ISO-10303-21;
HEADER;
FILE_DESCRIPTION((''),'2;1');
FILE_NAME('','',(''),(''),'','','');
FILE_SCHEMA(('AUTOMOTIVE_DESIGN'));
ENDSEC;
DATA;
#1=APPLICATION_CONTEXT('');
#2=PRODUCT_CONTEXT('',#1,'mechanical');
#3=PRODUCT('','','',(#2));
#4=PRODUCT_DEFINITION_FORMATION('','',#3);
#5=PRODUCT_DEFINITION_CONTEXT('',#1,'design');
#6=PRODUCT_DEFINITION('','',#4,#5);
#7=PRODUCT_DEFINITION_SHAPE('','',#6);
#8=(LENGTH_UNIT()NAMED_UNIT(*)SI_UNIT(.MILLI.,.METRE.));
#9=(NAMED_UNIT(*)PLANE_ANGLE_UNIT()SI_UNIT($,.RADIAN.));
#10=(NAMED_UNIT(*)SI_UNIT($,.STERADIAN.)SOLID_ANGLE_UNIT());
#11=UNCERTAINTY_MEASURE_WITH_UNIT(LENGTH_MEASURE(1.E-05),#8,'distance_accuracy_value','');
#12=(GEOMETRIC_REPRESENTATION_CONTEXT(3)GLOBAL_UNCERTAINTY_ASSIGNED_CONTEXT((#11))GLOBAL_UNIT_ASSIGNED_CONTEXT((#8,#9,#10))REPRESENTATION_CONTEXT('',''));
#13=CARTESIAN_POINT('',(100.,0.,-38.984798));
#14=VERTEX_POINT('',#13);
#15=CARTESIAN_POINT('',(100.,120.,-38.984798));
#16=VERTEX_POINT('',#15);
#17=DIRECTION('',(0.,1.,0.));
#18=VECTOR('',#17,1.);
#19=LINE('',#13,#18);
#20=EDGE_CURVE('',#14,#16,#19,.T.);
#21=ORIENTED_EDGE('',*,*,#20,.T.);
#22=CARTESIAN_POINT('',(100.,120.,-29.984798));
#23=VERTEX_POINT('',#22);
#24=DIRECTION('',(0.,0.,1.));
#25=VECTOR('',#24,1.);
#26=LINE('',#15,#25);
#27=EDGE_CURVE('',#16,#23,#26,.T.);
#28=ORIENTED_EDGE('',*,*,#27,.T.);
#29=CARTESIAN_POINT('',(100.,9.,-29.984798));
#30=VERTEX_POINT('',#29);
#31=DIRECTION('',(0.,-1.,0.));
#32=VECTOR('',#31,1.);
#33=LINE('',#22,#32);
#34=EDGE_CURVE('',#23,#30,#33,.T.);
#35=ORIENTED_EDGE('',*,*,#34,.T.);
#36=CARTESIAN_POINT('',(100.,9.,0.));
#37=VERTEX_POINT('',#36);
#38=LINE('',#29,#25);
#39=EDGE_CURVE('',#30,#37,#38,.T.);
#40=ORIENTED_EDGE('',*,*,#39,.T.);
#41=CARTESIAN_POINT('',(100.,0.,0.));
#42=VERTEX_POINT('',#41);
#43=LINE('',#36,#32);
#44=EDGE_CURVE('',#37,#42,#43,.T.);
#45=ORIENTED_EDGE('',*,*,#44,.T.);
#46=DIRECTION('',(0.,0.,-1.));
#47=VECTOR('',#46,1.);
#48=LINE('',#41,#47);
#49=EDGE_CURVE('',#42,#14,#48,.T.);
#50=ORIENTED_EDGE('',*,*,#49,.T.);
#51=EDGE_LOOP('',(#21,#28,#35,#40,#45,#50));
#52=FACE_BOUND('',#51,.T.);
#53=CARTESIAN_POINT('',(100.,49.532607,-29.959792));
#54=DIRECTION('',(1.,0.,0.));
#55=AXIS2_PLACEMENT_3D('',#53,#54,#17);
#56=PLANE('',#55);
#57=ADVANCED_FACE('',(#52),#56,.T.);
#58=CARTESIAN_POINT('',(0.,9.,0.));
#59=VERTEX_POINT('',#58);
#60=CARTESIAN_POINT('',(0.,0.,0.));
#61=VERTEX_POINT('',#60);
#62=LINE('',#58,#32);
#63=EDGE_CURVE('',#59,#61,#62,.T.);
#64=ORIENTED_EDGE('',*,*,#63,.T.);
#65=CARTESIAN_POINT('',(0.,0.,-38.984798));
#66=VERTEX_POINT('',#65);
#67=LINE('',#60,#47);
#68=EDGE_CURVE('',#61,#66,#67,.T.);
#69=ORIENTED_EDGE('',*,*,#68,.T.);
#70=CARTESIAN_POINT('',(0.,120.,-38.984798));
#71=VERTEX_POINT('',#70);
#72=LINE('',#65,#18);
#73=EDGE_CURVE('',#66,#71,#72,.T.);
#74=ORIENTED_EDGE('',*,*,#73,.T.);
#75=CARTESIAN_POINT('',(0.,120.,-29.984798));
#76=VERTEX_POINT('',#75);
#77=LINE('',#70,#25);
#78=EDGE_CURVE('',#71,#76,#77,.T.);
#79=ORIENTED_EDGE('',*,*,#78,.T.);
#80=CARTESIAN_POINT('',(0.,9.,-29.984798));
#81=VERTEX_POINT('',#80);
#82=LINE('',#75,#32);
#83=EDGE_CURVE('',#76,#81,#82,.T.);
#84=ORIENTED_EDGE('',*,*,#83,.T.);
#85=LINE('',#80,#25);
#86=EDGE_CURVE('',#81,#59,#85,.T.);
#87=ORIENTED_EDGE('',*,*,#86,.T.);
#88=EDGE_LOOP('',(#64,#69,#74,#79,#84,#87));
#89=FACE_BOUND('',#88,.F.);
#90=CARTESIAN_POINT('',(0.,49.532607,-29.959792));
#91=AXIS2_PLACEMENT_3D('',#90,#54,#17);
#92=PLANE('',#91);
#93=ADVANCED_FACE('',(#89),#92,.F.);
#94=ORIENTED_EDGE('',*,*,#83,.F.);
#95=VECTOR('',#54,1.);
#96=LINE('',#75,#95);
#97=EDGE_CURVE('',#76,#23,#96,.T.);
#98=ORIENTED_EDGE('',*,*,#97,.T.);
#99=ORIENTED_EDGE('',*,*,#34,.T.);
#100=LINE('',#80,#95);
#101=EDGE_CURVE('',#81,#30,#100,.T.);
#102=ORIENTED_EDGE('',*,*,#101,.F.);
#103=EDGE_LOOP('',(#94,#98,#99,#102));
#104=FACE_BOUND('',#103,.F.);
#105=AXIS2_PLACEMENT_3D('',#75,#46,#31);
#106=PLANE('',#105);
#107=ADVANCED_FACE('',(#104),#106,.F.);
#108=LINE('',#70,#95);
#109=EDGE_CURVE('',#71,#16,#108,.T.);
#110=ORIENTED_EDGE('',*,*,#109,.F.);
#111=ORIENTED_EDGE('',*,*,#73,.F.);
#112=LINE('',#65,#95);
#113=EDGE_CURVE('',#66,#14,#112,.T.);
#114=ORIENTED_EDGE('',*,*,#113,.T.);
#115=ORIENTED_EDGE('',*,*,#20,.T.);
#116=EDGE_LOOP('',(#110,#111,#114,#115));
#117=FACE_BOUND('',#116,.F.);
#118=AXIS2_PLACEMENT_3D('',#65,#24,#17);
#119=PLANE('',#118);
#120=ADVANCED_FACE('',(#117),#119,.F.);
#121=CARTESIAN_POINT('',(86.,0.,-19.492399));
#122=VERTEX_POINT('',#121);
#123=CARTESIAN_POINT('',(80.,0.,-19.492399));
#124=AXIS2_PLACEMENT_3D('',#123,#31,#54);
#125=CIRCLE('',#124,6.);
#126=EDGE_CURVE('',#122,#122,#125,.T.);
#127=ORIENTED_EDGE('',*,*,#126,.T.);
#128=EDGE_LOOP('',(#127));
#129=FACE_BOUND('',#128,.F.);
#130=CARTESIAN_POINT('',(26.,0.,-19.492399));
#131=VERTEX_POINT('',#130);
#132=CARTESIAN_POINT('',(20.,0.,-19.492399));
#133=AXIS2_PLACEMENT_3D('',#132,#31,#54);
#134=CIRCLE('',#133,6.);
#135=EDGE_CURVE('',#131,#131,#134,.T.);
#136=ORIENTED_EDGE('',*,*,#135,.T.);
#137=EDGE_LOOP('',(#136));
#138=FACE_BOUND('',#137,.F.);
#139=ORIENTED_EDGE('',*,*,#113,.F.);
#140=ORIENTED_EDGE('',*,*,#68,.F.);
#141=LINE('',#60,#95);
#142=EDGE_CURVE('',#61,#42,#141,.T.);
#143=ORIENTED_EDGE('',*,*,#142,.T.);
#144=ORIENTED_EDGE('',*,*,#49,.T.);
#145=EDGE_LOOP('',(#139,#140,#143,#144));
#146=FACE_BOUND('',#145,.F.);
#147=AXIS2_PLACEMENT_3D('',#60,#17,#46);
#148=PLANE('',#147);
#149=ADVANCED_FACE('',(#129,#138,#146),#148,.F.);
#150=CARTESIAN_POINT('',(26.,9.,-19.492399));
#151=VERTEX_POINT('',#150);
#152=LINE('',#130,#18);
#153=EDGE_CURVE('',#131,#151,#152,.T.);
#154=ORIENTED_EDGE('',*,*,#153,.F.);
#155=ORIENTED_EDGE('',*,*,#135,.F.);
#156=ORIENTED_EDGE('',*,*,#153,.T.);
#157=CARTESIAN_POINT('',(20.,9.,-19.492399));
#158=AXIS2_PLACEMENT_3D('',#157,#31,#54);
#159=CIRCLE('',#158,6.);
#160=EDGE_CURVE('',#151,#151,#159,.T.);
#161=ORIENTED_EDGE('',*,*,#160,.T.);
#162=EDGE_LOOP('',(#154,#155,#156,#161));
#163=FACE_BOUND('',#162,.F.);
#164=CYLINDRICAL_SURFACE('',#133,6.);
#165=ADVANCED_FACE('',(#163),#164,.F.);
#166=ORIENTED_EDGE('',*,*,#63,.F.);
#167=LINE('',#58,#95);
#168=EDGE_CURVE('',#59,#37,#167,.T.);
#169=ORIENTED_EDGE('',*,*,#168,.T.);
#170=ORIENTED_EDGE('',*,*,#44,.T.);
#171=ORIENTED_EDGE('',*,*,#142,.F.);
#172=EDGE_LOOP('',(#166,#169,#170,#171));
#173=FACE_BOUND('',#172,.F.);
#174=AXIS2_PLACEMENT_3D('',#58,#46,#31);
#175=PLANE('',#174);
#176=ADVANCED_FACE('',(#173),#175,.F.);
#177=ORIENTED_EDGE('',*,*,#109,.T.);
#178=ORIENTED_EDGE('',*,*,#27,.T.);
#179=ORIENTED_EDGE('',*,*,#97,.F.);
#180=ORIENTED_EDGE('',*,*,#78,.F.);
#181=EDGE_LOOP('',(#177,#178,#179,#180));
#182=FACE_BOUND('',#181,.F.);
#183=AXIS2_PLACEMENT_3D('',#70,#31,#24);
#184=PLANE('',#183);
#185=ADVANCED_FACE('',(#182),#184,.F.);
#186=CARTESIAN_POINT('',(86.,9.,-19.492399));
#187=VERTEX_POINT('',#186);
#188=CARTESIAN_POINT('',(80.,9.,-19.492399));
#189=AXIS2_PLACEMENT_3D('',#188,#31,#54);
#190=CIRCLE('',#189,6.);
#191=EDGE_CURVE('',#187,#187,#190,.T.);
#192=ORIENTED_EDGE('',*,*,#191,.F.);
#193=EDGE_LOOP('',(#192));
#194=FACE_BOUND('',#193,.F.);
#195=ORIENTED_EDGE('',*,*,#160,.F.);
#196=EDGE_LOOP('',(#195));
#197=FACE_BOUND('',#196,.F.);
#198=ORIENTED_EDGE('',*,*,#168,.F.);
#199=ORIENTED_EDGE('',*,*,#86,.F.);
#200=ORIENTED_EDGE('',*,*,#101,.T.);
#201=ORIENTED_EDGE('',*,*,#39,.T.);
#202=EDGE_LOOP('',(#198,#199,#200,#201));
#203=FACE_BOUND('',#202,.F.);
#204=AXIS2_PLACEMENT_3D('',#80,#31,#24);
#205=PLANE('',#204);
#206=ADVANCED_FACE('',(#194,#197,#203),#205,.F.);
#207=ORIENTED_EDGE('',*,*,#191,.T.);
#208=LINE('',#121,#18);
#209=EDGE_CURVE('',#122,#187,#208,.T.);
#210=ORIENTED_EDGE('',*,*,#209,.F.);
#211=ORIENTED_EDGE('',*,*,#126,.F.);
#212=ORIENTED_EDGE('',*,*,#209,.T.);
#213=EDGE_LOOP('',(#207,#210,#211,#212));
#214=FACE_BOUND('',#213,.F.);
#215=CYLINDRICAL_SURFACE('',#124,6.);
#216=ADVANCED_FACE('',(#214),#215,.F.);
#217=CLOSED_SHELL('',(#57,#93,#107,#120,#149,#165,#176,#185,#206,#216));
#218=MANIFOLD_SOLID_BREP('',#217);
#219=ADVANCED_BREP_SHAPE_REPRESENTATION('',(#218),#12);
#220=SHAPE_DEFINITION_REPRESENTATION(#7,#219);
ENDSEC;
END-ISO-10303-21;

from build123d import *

# Parameters (mm, degrees)
F1_DEPTH = 100
F2_R     = 6
F3_DEPTH = 25


with BuildPart() as f1:
    # F0 (on Right) → F1 (new body)
    with BuildSketch(Plane.YZ):
        Polygon((9, 0), (0, 0), (0, -38.9847982002), (120, -38.9847982002), (120, -29.9847982002), (9, -29.9847982002), align=None)
    extrude(amount=F1_DEPTH)

    # F2 (on face) → F3 (cut)
    with BuildSketch(Plane.XZ):
        with Locations((20, -19.4923991001)):
            Circle(F2_R)
        with Locations((80, -19.4923991001)):
            Circle(F2_R)
    extrude(amount=-F3_DEPTH, mode=Mode.SUBTRACT)


solid = f1.part
